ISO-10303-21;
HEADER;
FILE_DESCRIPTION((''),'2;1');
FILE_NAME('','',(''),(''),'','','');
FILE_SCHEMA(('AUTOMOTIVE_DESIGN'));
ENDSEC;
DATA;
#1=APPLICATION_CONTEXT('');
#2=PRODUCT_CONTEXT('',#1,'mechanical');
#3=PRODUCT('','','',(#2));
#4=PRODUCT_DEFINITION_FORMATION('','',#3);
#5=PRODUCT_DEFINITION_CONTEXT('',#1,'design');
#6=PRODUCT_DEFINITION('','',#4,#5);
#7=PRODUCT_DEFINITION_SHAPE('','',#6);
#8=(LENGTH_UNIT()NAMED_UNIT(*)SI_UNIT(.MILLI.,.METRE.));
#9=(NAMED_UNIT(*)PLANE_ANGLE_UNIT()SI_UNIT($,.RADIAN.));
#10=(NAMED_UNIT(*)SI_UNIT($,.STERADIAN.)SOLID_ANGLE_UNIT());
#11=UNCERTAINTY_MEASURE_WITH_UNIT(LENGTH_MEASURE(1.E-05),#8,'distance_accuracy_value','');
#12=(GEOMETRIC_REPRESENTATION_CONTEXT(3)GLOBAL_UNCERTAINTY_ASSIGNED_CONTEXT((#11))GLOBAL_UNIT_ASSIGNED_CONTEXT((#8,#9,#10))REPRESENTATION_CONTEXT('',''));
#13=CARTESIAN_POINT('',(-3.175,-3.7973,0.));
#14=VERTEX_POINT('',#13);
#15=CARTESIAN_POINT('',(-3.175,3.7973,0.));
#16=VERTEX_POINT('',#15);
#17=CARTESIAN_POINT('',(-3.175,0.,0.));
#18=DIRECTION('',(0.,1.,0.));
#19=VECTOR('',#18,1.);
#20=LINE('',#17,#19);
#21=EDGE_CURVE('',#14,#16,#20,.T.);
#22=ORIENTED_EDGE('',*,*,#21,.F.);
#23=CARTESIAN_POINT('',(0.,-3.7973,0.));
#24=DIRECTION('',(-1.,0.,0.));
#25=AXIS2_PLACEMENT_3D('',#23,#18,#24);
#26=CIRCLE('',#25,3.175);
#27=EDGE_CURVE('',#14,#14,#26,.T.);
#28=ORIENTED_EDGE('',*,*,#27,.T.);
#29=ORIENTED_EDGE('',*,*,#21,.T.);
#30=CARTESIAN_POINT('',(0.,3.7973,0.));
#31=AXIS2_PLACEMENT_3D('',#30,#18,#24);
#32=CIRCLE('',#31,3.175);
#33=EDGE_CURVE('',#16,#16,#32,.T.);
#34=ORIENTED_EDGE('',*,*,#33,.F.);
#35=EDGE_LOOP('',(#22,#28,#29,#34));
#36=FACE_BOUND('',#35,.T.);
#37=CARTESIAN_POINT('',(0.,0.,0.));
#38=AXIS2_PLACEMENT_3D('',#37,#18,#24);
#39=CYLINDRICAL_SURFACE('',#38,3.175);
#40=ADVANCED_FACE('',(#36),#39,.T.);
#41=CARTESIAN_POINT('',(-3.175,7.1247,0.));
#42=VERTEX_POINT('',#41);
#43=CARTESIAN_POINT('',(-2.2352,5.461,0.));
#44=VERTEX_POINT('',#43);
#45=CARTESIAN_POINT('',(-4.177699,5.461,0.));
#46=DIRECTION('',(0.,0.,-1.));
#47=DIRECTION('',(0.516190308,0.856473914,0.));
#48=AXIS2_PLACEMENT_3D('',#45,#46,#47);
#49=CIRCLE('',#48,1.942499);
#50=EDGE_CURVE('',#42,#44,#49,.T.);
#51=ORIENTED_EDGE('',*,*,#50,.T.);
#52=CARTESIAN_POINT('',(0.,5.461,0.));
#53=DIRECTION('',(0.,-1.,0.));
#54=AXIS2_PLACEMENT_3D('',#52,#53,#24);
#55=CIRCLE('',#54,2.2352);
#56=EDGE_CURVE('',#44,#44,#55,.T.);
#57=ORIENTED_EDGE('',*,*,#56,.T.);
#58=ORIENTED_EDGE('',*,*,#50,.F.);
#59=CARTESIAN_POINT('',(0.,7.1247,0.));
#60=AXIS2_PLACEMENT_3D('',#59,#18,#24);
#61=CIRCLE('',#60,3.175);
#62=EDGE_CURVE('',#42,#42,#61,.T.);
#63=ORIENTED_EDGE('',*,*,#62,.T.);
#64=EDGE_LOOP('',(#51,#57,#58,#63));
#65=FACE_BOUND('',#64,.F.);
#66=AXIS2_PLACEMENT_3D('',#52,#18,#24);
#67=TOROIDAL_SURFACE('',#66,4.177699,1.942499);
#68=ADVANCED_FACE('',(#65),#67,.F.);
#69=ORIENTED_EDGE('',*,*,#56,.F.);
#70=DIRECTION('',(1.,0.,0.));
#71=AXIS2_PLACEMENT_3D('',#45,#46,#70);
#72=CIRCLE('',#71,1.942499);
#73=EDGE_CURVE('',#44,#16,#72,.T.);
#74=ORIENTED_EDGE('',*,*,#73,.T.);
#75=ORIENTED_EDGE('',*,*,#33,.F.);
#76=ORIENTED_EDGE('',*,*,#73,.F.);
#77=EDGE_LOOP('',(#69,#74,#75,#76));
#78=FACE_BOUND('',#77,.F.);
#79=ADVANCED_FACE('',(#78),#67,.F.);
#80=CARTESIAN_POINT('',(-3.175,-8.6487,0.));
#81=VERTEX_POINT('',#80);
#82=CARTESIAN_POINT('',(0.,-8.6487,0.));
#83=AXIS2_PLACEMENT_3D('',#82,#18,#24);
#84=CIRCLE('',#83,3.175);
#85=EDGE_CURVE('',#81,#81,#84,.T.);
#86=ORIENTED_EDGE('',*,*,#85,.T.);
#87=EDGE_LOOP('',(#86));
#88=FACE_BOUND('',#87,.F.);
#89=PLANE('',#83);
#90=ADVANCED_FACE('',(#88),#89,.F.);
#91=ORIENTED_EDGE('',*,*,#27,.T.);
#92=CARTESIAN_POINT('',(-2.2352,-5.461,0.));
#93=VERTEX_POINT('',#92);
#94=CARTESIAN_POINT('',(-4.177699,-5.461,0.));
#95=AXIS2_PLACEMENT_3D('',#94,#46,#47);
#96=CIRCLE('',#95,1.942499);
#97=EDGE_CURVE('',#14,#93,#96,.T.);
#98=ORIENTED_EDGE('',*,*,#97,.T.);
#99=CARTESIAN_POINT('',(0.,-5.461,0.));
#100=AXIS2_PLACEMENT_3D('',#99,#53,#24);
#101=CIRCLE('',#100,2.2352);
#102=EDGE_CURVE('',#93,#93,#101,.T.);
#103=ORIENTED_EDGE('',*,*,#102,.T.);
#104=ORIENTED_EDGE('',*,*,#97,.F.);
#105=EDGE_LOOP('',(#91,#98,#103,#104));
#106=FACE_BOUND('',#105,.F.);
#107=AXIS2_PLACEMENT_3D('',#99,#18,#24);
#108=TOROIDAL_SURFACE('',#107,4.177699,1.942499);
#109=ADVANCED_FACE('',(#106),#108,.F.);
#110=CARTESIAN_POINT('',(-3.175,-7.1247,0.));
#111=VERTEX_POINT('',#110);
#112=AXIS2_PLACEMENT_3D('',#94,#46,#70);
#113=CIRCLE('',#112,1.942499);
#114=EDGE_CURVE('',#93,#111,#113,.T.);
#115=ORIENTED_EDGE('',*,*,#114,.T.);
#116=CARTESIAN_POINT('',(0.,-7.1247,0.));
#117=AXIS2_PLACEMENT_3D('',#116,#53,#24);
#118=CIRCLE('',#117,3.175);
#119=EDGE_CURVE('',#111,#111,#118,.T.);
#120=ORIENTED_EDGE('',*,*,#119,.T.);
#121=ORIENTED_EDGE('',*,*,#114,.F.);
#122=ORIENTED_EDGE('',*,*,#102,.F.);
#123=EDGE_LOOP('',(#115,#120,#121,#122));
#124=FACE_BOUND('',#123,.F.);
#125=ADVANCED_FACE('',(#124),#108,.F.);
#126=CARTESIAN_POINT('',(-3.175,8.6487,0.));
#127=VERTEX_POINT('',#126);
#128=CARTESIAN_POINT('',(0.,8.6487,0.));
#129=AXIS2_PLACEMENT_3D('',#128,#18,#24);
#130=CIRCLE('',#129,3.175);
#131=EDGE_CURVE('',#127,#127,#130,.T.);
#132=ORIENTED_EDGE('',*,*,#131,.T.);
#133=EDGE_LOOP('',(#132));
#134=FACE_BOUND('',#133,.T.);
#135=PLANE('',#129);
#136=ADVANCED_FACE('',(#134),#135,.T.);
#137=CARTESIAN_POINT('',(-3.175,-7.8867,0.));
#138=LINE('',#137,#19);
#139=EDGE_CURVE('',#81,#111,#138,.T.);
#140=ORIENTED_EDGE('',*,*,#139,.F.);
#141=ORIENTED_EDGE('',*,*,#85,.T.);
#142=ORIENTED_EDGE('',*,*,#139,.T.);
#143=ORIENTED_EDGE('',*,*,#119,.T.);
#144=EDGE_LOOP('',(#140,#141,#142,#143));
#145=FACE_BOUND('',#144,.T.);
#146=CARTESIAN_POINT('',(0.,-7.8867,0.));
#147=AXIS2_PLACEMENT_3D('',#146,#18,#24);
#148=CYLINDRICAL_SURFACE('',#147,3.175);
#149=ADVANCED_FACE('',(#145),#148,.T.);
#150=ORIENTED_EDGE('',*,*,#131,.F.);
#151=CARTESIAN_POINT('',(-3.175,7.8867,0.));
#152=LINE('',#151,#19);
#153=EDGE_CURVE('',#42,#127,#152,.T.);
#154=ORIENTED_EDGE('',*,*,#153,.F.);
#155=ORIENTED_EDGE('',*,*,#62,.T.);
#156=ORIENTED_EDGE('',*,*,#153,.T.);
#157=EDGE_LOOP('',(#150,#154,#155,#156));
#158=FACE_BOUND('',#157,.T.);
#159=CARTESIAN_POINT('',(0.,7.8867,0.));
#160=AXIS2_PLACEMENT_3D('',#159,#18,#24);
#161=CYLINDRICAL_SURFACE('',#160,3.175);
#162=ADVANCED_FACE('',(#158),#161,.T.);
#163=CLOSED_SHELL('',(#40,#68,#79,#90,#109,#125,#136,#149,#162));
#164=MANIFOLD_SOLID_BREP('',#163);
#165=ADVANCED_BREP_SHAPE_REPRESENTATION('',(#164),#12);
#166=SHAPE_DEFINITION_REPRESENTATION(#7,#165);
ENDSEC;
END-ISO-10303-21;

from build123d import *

# Parameters (mm, degrees)
F0_W   = 2.2352
F0_H   = 1.524
F0_W_2 = 0.9398
F0_H_2 = 7.5946


# Not quite as in the source:
# - a feature names something its author has since deleted; it is built from what else it names


with BuildPart() as f1:
    # F0 (on Top) → F1 (revolve)
    with BuildSketch(Plane.XY):
        with Locations((1.1176, 7.8867)):
            Rectangle(F0_W, F0_H)
        Polygon((2.2352, 7.1247), (0, 7.1247), (0, 3.7973), (2.2352, 3.7973), (2.2352, 5.4609999998), align=None)
        with Locations((-2.7051, 7.8867)):
            Rectangle(F0_W_2, F0_H)
        with Locations((1.1176, 0)):
            Rectangle(F0_W, F0_H_2)
        with BuildLine():
            Line((-2.2352, 5.461), (-2.2352, 7.1247))
            Line((-2.2352, 7.1247), (-3.175, 7.1247))
            ThreePointArc((-3.175, 7.1247), (-2.4863911938, 6.4163954325), (-2.2352, 5.461))
        make_face()
        Polygon((2.2352, -3.7973), (0, -3.7973), (0, -7.1247), (2.2352, -7.1247), (2.2352, -5.4610000002), align=None)
        with BuildLine():
            Line((-3.175, 3.7973), (-2.2352, 3.7973))
            Line((-2.2352, 3.7973), (-2.2352, 5.461))
            ThreePointArc((-2.2352, 5.461), (-2.4863911938, 4.5056045675), (-3.175, 3.7973))
        make_face()
        with Locations((-2.7051, 0)):
            Rectangle(F0_W_2, F0_H_2)
        with Locations((1.1176, -7.8867)):
            Rectangle(F0_W, F0_H)
        with BuildLine():
            Line((-2.2352, -5.461), (-2.2352, -3.7973))
            Line((-2.2352, -3.7973), (-3.175, -3.7973))
            ThreePointArc((-3.175, -3.7973), (-2.4863911938, -4.5056045675), (-2.2352, -5.461))
        make_face()
        with Locations((-2.7051, -7.8867)):
            Rectangle(F0_W_2, F0_H)
        with BuildLine():
            Line((-3.175, -7.1247), (-2.2352, -7.1247))
            Line((-2.2352, -7.1247), (-2.2352, -5.461))
            ThreePointArc((-2.2352, -5.461), (-2.4863911938, -6.4163954325), (-3.175, -7.1247))
        make_face()
        with Locations((2.7051, -7.8867)):
            Rectangle(F0_W_2, F0_H)
    revolve(axis=Axis((0, 0, 0), (0, 1, 0)))


solid = f1.part
